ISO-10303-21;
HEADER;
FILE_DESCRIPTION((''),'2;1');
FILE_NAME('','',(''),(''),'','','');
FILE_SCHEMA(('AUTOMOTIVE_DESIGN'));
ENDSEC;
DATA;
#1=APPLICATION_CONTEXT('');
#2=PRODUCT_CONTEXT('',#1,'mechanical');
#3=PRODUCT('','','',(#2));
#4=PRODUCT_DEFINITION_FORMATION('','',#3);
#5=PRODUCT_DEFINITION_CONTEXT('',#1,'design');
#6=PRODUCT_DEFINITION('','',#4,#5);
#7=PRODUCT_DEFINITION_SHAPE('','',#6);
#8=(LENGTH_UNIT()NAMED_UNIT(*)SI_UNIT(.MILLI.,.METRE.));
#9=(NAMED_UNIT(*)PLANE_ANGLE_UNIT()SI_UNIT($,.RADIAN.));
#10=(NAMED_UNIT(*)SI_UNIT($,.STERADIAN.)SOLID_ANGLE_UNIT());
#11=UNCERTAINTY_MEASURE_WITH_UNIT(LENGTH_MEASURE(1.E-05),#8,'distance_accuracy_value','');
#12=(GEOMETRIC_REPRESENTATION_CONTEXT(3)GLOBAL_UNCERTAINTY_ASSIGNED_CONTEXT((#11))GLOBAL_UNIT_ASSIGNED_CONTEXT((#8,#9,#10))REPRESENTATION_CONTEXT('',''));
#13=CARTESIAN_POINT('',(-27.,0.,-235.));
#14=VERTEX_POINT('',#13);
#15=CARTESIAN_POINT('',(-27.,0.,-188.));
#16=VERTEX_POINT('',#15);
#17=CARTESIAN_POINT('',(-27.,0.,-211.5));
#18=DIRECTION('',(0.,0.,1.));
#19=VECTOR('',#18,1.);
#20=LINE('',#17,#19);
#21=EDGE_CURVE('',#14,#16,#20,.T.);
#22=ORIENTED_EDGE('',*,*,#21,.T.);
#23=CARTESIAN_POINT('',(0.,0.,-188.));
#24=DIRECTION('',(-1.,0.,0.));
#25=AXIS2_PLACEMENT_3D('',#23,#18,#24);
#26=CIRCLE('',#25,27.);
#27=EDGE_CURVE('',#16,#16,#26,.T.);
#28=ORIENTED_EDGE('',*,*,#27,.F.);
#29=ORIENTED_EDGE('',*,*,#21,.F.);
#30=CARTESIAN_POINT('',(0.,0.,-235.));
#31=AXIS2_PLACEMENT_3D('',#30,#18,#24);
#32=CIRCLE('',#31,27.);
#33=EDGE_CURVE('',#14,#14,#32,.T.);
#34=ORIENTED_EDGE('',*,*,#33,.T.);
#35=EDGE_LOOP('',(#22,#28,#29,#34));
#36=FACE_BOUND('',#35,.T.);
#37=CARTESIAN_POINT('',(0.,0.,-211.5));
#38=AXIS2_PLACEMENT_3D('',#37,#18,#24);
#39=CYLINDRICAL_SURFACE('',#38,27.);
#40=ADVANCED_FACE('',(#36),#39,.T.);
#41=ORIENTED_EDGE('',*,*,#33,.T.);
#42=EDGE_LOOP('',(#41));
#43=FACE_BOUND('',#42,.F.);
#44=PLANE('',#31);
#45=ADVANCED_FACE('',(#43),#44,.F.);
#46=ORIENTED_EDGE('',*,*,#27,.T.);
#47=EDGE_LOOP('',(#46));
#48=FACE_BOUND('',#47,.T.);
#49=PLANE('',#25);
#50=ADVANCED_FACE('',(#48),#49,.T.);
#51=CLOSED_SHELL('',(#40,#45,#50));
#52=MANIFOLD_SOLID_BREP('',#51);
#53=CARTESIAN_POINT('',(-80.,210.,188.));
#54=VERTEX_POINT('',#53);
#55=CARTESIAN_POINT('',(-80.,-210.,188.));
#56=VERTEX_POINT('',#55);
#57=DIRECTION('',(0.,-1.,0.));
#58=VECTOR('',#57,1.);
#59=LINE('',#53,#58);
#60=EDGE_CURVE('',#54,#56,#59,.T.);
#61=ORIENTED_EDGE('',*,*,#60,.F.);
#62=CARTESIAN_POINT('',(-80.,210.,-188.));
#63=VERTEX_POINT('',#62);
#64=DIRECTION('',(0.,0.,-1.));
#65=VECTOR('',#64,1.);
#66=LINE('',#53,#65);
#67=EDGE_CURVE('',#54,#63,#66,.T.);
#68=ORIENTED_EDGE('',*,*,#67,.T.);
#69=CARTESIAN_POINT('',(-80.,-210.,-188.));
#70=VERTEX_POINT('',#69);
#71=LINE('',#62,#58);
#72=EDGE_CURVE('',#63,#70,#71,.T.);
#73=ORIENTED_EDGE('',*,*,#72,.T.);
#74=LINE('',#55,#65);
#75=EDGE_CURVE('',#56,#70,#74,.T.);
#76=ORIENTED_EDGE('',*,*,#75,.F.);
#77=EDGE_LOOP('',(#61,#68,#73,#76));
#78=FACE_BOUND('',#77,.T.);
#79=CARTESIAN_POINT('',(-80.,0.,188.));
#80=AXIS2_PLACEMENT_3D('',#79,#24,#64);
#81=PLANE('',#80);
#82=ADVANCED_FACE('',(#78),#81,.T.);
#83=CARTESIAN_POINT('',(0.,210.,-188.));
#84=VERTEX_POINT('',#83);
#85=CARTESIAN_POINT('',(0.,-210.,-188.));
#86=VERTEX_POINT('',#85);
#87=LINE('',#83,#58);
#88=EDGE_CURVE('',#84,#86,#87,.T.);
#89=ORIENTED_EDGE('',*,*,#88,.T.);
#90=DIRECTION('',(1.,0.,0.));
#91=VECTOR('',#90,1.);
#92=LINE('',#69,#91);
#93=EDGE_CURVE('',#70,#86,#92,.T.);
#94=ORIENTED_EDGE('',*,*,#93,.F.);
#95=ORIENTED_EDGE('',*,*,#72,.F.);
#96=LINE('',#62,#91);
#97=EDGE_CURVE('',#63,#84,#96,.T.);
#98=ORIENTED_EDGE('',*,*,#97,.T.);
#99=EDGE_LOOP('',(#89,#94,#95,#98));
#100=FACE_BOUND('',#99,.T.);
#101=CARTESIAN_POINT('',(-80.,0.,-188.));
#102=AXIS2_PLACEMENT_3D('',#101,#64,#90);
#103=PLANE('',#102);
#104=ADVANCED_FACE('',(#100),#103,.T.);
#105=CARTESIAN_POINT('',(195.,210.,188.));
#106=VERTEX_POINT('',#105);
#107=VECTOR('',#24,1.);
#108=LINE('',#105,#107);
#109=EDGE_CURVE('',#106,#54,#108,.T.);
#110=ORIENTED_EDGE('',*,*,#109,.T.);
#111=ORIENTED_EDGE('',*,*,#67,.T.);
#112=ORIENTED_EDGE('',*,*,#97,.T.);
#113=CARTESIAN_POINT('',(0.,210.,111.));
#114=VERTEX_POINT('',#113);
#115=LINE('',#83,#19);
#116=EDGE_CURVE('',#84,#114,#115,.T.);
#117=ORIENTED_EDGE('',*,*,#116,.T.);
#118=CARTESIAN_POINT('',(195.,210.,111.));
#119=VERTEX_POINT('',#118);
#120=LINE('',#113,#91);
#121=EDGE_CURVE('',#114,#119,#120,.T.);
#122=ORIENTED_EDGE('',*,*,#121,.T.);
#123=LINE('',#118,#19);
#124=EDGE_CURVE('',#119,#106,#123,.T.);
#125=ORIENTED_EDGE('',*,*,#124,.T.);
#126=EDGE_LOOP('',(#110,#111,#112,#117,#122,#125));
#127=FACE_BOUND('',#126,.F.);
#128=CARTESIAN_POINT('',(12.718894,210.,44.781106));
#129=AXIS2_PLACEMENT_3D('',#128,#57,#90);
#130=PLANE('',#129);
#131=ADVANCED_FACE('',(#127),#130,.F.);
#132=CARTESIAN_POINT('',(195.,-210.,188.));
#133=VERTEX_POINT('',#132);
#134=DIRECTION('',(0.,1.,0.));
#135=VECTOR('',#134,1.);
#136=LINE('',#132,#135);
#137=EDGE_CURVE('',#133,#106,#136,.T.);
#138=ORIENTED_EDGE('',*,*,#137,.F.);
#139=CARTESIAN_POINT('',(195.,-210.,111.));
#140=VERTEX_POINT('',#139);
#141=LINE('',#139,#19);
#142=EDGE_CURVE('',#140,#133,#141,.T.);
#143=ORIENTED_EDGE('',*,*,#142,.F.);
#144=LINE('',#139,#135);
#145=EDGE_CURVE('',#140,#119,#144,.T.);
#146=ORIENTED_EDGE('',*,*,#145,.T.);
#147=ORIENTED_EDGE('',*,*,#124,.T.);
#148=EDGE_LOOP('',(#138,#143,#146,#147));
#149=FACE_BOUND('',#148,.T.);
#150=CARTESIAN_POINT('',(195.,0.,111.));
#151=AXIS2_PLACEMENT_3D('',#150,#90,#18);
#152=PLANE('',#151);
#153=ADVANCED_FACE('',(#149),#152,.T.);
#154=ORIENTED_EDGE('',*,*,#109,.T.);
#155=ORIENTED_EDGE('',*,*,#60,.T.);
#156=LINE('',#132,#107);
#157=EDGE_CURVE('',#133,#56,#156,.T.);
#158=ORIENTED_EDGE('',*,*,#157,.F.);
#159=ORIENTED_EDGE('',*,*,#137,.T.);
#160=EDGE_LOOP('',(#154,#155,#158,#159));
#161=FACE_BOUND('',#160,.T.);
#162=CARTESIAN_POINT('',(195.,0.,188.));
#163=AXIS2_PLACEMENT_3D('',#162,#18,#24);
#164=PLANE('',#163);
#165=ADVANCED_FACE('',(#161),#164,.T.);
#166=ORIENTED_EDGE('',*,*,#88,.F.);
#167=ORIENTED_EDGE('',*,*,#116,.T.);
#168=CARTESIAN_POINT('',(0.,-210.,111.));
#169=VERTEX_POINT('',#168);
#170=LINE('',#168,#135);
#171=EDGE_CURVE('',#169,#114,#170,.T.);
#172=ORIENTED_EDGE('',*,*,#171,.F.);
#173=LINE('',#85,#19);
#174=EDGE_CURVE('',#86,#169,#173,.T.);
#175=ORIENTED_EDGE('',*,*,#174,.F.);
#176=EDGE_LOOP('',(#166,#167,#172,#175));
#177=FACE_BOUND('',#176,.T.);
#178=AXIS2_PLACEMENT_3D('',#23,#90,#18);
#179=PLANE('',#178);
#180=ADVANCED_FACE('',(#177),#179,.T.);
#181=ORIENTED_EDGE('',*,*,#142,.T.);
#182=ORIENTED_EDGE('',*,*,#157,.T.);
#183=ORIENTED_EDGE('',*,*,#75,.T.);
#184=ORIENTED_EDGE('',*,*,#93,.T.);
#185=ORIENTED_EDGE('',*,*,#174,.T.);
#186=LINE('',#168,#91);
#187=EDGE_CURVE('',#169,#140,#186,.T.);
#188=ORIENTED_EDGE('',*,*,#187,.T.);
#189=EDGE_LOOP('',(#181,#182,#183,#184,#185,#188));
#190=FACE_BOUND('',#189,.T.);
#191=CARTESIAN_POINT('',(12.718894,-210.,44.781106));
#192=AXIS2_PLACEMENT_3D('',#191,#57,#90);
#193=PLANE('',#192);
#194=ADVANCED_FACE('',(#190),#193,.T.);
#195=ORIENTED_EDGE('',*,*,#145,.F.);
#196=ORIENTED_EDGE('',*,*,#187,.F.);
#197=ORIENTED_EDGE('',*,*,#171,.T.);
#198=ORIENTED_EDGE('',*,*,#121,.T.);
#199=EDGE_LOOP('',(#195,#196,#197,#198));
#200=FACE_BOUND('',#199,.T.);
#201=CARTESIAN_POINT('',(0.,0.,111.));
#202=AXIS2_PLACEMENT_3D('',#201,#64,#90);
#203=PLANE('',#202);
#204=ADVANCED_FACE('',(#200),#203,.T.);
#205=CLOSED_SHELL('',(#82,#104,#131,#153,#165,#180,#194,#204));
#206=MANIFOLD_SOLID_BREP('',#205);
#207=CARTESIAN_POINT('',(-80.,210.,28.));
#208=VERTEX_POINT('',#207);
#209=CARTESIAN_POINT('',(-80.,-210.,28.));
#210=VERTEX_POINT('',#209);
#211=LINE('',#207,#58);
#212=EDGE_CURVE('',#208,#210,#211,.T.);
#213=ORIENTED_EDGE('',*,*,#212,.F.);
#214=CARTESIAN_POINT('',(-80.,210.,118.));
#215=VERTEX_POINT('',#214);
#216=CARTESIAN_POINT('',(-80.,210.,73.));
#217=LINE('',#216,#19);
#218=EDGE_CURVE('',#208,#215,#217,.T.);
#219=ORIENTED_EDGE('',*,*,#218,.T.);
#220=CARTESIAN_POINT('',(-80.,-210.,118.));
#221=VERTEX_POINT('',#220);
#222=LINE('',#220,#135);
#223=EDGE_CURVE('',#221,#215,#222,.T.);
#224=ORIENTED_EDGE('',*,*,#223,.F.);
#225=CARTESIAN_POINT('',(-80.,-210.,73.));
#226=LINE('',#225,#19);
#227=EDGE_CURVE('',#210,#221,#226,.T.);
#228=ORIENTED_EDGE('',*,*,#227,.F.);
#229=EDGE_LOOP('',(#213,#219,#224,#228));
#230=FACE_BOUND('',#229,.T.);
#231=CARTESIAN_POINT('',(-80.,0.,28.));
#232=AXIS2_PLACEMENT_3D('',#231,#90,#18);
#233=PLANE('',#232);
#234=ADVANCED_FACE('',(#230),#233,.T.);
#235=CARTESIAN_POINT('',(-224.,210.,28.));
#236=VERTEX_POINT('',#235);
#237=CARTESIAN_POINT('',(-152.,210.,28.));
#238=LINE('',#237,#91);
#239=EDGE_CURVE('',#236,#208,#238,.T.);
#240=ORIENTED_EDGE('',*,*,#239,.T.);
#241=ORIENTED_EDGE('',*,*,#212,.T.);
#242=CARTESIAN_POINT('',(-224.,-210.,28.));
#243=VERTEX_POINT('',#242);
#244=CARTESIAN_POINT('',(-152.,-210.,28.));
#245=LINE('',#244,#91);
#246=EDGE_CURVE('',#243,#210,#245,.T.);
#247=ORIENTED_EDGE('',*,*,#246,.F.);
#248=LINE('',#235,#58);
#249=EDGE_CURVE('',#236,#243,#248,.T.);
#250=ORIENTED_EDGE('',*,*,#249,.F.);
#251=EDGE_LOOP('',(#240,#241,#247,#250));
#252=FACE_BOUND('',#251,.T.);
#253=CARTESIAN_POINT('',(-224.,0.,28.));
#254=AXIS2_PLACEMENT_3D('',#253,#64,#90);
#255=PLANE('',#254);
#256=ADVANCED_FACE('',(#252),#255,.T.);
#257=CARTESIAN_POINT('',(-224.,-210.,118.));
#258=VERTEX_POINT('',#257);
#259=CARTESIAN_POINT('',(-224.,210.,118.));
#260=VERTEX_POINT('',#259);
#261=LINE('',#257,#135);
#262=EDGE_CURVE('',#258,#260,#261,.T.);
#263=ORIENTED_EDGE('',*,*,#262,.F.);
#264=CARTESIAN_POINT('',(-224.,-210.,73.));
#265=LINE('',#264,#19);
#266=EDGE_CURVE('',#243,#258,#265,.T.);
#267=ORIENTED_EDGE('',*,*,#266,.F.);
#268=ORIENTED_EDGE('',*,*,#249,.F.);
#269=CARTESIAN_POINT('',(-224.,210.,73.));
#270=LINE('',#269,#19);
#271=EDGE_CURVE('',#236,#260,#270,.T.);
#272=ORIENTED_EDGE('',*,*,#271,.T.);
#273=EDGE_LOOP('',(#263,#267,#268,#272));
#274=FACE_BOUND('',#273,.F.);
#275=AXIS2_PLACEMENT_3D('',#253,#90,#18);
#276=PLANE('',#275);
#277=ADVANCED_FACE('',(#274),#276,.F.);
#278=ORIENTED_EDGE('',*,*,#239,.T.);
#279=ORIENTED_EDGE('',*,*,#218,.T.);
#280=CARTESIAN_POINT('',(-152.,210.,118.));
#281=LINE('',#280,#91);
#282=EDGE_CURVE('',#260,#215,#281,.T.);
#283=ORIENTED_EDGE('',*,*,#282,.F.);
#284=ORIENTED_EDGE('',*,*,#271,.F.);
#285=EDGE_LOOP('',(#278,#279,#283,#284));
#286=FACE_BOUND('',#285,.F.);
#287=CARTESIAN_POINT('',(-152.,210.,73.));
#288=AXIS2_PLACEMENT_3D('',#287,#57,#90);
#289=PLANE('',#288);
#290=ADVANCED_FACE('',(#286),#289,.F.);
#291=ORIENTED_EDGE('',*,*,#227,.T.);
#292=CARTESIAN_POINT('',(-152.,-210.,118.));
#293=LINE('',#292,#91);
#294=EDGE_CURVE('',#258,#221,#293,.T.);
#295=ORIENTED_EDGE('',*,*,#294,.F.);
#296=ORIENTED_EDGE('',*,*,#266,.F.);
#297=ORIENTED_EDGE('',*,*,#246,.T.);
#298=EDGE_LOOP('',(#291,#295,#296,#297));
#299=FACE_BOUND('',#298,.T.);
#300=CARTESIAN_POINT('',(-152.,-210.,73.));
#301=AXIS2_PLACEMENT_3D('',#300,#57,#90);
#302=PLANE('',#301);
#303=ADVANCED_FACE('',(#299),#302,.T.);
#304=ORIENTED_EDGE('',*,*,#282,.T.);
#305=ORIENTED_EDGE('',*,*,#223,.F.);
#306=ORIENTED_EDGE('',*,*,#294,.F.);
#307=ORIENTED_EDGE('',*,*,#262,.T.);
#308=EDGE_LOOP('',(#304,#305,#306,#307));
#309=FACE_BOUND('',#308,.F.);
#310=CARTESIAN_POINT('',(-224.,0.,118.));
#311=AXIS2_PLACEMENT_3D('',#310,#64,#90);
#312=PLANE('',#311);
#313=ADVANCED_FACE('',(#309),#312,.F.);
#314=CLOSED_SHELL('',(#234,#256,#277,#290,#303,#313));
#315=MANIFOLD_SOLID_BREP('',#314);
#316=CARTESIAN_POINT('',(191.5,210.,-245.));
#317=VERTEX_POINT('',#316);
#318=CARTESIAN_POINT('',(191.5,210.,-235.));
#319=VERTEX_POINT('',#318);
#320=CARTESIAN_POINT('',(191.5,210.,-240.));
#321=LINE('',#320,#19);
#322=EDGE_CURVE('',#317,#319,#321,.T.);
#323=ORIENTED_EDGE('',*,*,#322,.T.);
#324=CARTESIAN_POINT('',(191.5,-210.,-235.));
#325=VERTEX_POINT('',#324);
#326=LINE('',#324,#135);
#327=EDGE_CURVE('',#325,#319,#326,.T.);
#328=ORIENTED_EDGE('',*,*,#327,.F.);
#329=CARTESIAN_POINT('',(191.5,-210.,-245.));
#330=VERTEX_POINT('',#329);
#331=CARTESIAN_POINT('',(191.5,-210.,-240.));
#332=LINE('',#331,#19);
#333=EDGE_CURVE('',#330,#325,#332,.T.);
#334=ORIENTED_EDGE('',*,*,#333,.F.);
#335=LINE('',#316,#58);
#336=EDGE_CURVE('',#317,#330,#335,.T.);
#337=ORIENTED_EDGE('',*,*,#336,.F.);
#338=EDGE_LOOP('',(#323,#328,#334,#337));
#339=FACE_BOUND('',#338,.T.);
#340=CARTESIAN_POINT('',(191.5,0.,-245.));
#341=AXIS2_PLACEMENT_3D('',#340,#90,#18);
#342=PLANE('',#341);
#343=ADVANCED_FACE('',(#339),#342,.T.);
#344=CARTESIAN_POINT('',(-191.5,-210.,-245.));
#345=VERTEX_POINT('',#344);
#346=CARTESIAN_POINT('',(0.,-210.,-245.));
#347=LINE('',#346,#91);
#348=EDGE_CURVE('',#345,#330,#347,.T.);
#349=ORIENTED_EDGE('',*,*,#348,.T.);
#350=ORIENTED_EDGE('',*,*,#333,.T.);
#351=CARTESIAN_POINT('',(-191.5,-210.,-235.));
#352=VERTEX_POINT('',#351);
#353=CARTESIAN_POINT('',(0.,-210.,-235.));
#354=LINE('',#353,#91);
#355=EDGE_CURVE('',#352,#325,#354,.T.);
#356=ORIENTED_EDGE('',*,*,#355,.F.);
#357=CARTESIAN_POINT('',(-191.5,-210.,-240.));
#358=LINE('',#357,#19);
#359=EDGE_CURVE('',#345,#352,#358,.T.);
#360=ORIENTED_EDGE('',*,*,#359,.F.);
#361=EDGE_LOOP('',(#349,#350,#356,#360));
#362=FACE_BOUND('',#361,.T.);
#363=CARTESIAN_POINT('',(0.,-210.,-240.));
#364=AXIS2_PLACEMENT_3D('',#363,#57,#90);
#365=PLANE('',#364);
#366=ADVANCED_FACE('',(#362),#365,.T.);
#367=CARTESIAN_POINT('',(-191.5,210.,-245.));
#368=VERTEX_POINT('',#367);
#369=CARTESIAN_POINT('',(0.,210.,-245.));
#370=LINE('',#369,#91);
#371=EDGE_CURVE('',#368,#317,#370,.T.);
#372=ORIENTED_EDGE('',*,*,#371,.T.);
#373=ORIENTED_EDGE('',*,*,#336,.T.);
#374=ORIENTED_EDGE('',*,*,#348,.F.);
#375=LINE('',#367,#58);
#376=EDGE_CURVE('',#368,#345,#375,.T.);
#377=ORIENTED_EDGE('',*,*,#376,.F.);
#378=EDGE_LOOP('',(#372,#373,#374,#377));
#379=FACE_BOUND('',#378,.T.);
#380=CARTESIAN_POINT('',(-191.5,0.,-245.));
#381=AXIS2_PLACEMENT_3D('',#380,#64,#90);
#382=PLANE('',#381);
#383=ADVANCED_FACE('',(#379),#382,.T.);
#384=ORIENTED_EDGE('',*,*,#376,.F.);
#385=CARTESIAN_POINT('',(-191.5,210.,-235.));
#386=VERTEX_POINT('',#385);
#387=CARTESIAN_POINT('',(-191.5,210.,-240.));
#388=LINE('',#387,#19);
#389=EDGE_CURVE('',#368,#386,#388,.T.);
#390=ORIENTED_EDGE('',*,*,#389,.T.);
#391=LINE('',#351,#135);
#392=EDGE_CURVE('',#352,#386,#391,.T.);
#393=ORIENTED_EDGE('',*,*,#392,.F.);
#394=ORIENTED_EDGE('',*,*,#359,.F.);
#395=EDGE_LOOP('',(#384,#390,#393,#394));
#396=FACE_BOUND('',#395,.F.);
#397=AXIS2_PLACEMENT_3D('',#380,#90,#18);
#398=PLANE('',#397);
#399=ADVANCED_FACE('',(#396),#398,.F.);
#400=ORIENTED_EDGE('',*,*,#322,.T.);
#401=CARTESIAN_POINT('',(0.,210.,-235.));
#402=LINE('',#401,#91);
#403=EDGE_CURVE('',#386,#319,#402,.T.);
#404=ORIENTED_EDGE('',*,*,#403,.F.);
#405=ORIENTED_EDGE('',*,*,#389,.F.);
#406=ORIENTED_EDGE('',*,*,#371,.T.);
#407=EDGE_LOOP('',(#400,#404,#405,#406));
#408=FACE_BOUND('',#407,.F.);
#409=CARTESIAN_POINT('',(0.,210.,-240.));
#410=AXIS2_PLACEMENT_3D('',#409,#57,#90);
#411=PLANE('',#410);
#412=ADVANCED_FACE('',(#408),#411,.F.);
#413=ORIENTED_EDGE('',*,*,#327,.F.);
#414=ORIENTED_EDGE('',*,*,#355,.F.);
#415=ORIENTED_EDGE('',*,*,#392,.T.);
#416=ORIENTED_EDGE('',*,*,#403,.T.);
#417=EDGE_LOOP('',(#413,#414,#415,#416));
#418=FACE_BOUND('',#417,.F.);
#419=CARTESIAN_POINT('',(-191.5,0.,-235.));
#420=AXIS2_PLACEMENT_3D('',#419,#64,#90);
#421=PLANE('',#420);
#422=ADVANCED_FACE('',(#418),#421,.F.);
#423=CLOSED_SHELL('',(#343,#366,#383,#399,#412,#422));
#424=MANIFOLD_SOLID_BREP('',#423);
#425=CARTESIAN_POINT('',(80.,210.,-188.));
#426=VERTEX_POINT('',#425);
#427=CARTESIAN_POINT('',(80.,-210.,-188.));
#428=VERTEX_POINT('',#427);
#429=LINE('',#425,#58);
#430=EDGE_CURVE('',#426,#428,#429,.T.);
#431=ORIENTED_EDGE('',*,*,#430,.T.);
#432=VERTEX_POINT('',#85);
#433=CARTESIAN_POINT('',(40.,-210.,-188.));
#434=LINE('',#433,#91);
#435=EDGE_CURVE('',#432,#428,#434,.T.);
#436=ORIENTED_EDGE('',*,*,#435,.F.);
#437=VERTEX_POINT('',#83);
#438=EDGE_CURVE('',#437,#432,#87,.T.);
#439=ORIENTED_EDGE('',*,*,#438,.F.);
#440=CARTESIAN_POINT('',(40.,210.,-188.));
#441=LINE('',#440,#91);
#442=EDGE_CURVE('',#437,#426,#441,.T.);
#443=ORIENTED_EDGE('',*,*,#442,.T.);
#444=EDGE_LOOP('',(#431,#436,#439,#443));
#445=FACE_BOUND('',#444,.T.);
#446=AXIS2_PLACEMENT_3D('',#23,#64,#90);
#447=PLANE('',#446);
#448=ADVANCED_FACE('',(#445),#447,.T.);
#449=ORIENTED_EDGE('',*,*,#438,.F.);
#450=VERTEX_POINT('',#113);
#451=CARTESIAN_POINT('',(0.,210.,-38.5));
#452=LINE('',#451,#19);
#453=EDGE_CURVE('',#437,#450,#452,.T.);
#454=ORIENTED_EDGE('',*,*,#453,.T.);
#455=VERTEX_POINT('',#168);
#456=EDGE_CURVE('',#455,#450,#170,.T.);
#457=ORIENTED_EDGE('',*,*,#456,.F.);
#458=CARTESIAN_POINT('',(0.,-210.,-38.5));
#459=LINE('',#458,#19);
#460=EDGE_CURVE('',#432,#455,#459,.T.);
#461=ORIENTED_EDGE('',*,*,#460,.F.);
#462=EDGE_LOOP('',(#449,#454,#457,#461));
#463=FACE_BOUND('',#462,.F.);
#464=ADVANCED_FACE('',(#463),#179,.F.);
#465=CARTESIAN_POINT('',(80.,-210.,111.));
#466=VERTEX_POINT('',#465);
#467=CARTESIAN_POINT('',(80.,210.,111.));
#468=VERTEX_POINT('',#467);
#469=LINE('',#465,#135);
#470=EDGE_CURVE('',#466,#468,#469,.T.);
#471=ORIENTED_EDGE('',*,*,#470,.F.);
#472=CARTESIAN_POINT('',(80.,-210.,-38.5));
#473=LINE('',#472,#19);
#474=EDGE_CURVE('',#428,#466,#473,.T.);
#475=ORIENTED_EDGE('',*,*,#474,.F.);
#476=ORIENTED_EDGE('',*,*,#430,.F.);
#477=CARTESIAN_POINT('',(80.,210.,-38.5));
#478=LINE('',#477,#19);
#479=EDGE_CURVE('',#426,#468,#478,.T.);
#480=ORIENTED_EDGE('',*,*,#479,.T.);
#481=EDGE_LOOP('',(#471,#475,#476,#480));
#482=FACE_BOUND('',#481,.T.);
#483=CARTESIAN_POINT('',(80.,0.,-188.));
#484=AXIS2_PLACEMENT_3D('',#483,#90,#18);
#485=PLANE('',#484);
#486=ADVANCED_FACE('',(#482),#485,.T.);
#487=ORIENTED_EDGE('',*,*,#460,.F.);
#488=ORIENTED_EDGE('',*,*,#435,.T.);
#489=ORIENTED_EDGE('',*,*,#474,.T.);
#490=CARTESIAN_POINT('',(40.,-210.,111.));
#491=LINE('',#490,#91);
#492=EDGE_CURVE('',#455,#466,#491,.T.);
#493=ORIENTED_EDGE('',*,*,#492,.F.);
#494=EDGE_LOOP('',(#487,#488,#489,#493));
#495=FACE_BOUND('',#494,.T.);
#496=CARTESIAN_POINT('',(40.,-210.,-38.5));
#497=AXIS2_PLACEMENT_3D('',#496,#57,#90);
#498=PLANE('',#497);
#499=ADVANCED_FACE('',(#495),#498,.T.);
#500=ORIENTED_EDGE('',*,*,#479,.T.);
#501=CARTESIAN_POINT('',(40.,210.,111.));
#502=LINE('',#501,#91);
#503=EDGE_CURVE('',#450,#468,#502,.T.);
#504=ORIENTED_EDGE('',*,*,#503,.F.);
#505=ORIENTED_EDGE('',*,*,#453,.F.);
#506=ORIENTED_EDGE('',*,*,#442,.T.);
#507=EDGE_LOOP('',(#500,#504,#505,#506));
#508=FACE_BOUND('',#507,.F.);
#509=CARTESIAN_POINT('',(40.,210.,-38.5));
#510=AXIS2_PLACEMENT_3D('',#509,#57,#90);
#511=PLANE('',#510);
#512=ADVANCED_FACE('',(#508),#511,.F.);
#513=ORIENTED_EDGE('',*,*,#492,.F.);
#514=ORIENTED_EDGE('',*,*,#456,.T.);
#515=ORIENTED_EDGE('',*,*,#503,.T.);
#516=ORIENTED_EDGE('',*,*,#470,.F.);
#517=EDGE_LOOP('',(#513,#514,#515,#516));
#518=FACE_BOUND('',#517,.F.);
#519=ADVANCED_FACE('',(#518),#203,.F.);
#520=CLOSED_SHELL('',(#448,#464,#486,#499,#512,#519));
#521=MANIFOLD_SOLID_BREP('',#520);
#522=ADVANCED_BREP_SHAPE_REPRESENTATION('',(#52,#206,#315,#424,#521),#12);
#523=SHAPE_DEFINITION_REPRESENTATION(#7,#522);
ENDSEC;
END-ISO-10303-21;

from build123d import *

# Parameters (mm, degrees)
F2_DEPTH      = 210
F2_DEPTH_BACK = 210
F1_W          = 80
F1_H          = 299
F3_DEPTH      = 210
F3_DEPTH_BACK = 210
F1_W_2        = 144
F1_H_2        = 90
F4_W          = 27
F4_H          = 47
F5_W          = 383
F5_H          = 10
F7_DEPTH      = 210
F7_DEPTH_BACK = 210


with BuildPart() as f2:
    # F0 (on Front) → F2 (new body, two sides)
    with BuildSketch(Plane.XZ) as f2_sk:
        Polygon((195, 188), (-80, 188), (-80, -188), (0, -188), (0, 111), (195, 111), align=None)
    extrude(amount=F2_DEPTH)
    extrude(f2_sk.sketch, amount=-F2_DEPTH_BACK)


with BuildPart() as f3:
    # F1 (on Front) → F3 (new body, two sides)
    with BuildSketch(Plane.XZ) as f3_sk:
        with Locations((40, -38.5)):
            Rectangle(F1_W, F1_H)
    extrude(amount=F3_DEPTH)
    extrude(f3_sk.sketch, amount=-F3_DEPTH_BACK)


with BuildPart() as f3b:
    # F1 (on Front) → F3, piece 2 (new body, two sides)
    with BuildSketch(Plane.XZ) as f3_2_sk:
        with Locations((-152, 73)):
            Rectangle(F1_W_2, F1_H_2)
    extrude(amount=F3_DEPTH)
    extrude(f3_2_sk.sketch, amount=-F3_DEPTH_BACK)


with BuildPart() as f6:
    # F4 (on Front) → F6 (revolve)
    with BuildSketch(Plane.XZ):
        with Locations((-13.5, -211.5)):
            Rectangle(F4_W, F4_H)
    revolve(axis=Axis((0, 0, -211.5), (0, 0, 1)))


with BuildPart() as f7:
    # F5 (on Front) → F7 (new body, two sides)
    with BuildSketch(Plane.XZ) as f7_sk:
        with Locations((0, -240)):
            Rectangle(F5_W, F5_H)
    extrude(amount=F7_DEPTH)
    extrude(f7_sk.sketch, amount=-F7_DEPTH_BACK)


solid = Compound([f2.part, f3.part, f3b.part, f6.part, f7.part])
